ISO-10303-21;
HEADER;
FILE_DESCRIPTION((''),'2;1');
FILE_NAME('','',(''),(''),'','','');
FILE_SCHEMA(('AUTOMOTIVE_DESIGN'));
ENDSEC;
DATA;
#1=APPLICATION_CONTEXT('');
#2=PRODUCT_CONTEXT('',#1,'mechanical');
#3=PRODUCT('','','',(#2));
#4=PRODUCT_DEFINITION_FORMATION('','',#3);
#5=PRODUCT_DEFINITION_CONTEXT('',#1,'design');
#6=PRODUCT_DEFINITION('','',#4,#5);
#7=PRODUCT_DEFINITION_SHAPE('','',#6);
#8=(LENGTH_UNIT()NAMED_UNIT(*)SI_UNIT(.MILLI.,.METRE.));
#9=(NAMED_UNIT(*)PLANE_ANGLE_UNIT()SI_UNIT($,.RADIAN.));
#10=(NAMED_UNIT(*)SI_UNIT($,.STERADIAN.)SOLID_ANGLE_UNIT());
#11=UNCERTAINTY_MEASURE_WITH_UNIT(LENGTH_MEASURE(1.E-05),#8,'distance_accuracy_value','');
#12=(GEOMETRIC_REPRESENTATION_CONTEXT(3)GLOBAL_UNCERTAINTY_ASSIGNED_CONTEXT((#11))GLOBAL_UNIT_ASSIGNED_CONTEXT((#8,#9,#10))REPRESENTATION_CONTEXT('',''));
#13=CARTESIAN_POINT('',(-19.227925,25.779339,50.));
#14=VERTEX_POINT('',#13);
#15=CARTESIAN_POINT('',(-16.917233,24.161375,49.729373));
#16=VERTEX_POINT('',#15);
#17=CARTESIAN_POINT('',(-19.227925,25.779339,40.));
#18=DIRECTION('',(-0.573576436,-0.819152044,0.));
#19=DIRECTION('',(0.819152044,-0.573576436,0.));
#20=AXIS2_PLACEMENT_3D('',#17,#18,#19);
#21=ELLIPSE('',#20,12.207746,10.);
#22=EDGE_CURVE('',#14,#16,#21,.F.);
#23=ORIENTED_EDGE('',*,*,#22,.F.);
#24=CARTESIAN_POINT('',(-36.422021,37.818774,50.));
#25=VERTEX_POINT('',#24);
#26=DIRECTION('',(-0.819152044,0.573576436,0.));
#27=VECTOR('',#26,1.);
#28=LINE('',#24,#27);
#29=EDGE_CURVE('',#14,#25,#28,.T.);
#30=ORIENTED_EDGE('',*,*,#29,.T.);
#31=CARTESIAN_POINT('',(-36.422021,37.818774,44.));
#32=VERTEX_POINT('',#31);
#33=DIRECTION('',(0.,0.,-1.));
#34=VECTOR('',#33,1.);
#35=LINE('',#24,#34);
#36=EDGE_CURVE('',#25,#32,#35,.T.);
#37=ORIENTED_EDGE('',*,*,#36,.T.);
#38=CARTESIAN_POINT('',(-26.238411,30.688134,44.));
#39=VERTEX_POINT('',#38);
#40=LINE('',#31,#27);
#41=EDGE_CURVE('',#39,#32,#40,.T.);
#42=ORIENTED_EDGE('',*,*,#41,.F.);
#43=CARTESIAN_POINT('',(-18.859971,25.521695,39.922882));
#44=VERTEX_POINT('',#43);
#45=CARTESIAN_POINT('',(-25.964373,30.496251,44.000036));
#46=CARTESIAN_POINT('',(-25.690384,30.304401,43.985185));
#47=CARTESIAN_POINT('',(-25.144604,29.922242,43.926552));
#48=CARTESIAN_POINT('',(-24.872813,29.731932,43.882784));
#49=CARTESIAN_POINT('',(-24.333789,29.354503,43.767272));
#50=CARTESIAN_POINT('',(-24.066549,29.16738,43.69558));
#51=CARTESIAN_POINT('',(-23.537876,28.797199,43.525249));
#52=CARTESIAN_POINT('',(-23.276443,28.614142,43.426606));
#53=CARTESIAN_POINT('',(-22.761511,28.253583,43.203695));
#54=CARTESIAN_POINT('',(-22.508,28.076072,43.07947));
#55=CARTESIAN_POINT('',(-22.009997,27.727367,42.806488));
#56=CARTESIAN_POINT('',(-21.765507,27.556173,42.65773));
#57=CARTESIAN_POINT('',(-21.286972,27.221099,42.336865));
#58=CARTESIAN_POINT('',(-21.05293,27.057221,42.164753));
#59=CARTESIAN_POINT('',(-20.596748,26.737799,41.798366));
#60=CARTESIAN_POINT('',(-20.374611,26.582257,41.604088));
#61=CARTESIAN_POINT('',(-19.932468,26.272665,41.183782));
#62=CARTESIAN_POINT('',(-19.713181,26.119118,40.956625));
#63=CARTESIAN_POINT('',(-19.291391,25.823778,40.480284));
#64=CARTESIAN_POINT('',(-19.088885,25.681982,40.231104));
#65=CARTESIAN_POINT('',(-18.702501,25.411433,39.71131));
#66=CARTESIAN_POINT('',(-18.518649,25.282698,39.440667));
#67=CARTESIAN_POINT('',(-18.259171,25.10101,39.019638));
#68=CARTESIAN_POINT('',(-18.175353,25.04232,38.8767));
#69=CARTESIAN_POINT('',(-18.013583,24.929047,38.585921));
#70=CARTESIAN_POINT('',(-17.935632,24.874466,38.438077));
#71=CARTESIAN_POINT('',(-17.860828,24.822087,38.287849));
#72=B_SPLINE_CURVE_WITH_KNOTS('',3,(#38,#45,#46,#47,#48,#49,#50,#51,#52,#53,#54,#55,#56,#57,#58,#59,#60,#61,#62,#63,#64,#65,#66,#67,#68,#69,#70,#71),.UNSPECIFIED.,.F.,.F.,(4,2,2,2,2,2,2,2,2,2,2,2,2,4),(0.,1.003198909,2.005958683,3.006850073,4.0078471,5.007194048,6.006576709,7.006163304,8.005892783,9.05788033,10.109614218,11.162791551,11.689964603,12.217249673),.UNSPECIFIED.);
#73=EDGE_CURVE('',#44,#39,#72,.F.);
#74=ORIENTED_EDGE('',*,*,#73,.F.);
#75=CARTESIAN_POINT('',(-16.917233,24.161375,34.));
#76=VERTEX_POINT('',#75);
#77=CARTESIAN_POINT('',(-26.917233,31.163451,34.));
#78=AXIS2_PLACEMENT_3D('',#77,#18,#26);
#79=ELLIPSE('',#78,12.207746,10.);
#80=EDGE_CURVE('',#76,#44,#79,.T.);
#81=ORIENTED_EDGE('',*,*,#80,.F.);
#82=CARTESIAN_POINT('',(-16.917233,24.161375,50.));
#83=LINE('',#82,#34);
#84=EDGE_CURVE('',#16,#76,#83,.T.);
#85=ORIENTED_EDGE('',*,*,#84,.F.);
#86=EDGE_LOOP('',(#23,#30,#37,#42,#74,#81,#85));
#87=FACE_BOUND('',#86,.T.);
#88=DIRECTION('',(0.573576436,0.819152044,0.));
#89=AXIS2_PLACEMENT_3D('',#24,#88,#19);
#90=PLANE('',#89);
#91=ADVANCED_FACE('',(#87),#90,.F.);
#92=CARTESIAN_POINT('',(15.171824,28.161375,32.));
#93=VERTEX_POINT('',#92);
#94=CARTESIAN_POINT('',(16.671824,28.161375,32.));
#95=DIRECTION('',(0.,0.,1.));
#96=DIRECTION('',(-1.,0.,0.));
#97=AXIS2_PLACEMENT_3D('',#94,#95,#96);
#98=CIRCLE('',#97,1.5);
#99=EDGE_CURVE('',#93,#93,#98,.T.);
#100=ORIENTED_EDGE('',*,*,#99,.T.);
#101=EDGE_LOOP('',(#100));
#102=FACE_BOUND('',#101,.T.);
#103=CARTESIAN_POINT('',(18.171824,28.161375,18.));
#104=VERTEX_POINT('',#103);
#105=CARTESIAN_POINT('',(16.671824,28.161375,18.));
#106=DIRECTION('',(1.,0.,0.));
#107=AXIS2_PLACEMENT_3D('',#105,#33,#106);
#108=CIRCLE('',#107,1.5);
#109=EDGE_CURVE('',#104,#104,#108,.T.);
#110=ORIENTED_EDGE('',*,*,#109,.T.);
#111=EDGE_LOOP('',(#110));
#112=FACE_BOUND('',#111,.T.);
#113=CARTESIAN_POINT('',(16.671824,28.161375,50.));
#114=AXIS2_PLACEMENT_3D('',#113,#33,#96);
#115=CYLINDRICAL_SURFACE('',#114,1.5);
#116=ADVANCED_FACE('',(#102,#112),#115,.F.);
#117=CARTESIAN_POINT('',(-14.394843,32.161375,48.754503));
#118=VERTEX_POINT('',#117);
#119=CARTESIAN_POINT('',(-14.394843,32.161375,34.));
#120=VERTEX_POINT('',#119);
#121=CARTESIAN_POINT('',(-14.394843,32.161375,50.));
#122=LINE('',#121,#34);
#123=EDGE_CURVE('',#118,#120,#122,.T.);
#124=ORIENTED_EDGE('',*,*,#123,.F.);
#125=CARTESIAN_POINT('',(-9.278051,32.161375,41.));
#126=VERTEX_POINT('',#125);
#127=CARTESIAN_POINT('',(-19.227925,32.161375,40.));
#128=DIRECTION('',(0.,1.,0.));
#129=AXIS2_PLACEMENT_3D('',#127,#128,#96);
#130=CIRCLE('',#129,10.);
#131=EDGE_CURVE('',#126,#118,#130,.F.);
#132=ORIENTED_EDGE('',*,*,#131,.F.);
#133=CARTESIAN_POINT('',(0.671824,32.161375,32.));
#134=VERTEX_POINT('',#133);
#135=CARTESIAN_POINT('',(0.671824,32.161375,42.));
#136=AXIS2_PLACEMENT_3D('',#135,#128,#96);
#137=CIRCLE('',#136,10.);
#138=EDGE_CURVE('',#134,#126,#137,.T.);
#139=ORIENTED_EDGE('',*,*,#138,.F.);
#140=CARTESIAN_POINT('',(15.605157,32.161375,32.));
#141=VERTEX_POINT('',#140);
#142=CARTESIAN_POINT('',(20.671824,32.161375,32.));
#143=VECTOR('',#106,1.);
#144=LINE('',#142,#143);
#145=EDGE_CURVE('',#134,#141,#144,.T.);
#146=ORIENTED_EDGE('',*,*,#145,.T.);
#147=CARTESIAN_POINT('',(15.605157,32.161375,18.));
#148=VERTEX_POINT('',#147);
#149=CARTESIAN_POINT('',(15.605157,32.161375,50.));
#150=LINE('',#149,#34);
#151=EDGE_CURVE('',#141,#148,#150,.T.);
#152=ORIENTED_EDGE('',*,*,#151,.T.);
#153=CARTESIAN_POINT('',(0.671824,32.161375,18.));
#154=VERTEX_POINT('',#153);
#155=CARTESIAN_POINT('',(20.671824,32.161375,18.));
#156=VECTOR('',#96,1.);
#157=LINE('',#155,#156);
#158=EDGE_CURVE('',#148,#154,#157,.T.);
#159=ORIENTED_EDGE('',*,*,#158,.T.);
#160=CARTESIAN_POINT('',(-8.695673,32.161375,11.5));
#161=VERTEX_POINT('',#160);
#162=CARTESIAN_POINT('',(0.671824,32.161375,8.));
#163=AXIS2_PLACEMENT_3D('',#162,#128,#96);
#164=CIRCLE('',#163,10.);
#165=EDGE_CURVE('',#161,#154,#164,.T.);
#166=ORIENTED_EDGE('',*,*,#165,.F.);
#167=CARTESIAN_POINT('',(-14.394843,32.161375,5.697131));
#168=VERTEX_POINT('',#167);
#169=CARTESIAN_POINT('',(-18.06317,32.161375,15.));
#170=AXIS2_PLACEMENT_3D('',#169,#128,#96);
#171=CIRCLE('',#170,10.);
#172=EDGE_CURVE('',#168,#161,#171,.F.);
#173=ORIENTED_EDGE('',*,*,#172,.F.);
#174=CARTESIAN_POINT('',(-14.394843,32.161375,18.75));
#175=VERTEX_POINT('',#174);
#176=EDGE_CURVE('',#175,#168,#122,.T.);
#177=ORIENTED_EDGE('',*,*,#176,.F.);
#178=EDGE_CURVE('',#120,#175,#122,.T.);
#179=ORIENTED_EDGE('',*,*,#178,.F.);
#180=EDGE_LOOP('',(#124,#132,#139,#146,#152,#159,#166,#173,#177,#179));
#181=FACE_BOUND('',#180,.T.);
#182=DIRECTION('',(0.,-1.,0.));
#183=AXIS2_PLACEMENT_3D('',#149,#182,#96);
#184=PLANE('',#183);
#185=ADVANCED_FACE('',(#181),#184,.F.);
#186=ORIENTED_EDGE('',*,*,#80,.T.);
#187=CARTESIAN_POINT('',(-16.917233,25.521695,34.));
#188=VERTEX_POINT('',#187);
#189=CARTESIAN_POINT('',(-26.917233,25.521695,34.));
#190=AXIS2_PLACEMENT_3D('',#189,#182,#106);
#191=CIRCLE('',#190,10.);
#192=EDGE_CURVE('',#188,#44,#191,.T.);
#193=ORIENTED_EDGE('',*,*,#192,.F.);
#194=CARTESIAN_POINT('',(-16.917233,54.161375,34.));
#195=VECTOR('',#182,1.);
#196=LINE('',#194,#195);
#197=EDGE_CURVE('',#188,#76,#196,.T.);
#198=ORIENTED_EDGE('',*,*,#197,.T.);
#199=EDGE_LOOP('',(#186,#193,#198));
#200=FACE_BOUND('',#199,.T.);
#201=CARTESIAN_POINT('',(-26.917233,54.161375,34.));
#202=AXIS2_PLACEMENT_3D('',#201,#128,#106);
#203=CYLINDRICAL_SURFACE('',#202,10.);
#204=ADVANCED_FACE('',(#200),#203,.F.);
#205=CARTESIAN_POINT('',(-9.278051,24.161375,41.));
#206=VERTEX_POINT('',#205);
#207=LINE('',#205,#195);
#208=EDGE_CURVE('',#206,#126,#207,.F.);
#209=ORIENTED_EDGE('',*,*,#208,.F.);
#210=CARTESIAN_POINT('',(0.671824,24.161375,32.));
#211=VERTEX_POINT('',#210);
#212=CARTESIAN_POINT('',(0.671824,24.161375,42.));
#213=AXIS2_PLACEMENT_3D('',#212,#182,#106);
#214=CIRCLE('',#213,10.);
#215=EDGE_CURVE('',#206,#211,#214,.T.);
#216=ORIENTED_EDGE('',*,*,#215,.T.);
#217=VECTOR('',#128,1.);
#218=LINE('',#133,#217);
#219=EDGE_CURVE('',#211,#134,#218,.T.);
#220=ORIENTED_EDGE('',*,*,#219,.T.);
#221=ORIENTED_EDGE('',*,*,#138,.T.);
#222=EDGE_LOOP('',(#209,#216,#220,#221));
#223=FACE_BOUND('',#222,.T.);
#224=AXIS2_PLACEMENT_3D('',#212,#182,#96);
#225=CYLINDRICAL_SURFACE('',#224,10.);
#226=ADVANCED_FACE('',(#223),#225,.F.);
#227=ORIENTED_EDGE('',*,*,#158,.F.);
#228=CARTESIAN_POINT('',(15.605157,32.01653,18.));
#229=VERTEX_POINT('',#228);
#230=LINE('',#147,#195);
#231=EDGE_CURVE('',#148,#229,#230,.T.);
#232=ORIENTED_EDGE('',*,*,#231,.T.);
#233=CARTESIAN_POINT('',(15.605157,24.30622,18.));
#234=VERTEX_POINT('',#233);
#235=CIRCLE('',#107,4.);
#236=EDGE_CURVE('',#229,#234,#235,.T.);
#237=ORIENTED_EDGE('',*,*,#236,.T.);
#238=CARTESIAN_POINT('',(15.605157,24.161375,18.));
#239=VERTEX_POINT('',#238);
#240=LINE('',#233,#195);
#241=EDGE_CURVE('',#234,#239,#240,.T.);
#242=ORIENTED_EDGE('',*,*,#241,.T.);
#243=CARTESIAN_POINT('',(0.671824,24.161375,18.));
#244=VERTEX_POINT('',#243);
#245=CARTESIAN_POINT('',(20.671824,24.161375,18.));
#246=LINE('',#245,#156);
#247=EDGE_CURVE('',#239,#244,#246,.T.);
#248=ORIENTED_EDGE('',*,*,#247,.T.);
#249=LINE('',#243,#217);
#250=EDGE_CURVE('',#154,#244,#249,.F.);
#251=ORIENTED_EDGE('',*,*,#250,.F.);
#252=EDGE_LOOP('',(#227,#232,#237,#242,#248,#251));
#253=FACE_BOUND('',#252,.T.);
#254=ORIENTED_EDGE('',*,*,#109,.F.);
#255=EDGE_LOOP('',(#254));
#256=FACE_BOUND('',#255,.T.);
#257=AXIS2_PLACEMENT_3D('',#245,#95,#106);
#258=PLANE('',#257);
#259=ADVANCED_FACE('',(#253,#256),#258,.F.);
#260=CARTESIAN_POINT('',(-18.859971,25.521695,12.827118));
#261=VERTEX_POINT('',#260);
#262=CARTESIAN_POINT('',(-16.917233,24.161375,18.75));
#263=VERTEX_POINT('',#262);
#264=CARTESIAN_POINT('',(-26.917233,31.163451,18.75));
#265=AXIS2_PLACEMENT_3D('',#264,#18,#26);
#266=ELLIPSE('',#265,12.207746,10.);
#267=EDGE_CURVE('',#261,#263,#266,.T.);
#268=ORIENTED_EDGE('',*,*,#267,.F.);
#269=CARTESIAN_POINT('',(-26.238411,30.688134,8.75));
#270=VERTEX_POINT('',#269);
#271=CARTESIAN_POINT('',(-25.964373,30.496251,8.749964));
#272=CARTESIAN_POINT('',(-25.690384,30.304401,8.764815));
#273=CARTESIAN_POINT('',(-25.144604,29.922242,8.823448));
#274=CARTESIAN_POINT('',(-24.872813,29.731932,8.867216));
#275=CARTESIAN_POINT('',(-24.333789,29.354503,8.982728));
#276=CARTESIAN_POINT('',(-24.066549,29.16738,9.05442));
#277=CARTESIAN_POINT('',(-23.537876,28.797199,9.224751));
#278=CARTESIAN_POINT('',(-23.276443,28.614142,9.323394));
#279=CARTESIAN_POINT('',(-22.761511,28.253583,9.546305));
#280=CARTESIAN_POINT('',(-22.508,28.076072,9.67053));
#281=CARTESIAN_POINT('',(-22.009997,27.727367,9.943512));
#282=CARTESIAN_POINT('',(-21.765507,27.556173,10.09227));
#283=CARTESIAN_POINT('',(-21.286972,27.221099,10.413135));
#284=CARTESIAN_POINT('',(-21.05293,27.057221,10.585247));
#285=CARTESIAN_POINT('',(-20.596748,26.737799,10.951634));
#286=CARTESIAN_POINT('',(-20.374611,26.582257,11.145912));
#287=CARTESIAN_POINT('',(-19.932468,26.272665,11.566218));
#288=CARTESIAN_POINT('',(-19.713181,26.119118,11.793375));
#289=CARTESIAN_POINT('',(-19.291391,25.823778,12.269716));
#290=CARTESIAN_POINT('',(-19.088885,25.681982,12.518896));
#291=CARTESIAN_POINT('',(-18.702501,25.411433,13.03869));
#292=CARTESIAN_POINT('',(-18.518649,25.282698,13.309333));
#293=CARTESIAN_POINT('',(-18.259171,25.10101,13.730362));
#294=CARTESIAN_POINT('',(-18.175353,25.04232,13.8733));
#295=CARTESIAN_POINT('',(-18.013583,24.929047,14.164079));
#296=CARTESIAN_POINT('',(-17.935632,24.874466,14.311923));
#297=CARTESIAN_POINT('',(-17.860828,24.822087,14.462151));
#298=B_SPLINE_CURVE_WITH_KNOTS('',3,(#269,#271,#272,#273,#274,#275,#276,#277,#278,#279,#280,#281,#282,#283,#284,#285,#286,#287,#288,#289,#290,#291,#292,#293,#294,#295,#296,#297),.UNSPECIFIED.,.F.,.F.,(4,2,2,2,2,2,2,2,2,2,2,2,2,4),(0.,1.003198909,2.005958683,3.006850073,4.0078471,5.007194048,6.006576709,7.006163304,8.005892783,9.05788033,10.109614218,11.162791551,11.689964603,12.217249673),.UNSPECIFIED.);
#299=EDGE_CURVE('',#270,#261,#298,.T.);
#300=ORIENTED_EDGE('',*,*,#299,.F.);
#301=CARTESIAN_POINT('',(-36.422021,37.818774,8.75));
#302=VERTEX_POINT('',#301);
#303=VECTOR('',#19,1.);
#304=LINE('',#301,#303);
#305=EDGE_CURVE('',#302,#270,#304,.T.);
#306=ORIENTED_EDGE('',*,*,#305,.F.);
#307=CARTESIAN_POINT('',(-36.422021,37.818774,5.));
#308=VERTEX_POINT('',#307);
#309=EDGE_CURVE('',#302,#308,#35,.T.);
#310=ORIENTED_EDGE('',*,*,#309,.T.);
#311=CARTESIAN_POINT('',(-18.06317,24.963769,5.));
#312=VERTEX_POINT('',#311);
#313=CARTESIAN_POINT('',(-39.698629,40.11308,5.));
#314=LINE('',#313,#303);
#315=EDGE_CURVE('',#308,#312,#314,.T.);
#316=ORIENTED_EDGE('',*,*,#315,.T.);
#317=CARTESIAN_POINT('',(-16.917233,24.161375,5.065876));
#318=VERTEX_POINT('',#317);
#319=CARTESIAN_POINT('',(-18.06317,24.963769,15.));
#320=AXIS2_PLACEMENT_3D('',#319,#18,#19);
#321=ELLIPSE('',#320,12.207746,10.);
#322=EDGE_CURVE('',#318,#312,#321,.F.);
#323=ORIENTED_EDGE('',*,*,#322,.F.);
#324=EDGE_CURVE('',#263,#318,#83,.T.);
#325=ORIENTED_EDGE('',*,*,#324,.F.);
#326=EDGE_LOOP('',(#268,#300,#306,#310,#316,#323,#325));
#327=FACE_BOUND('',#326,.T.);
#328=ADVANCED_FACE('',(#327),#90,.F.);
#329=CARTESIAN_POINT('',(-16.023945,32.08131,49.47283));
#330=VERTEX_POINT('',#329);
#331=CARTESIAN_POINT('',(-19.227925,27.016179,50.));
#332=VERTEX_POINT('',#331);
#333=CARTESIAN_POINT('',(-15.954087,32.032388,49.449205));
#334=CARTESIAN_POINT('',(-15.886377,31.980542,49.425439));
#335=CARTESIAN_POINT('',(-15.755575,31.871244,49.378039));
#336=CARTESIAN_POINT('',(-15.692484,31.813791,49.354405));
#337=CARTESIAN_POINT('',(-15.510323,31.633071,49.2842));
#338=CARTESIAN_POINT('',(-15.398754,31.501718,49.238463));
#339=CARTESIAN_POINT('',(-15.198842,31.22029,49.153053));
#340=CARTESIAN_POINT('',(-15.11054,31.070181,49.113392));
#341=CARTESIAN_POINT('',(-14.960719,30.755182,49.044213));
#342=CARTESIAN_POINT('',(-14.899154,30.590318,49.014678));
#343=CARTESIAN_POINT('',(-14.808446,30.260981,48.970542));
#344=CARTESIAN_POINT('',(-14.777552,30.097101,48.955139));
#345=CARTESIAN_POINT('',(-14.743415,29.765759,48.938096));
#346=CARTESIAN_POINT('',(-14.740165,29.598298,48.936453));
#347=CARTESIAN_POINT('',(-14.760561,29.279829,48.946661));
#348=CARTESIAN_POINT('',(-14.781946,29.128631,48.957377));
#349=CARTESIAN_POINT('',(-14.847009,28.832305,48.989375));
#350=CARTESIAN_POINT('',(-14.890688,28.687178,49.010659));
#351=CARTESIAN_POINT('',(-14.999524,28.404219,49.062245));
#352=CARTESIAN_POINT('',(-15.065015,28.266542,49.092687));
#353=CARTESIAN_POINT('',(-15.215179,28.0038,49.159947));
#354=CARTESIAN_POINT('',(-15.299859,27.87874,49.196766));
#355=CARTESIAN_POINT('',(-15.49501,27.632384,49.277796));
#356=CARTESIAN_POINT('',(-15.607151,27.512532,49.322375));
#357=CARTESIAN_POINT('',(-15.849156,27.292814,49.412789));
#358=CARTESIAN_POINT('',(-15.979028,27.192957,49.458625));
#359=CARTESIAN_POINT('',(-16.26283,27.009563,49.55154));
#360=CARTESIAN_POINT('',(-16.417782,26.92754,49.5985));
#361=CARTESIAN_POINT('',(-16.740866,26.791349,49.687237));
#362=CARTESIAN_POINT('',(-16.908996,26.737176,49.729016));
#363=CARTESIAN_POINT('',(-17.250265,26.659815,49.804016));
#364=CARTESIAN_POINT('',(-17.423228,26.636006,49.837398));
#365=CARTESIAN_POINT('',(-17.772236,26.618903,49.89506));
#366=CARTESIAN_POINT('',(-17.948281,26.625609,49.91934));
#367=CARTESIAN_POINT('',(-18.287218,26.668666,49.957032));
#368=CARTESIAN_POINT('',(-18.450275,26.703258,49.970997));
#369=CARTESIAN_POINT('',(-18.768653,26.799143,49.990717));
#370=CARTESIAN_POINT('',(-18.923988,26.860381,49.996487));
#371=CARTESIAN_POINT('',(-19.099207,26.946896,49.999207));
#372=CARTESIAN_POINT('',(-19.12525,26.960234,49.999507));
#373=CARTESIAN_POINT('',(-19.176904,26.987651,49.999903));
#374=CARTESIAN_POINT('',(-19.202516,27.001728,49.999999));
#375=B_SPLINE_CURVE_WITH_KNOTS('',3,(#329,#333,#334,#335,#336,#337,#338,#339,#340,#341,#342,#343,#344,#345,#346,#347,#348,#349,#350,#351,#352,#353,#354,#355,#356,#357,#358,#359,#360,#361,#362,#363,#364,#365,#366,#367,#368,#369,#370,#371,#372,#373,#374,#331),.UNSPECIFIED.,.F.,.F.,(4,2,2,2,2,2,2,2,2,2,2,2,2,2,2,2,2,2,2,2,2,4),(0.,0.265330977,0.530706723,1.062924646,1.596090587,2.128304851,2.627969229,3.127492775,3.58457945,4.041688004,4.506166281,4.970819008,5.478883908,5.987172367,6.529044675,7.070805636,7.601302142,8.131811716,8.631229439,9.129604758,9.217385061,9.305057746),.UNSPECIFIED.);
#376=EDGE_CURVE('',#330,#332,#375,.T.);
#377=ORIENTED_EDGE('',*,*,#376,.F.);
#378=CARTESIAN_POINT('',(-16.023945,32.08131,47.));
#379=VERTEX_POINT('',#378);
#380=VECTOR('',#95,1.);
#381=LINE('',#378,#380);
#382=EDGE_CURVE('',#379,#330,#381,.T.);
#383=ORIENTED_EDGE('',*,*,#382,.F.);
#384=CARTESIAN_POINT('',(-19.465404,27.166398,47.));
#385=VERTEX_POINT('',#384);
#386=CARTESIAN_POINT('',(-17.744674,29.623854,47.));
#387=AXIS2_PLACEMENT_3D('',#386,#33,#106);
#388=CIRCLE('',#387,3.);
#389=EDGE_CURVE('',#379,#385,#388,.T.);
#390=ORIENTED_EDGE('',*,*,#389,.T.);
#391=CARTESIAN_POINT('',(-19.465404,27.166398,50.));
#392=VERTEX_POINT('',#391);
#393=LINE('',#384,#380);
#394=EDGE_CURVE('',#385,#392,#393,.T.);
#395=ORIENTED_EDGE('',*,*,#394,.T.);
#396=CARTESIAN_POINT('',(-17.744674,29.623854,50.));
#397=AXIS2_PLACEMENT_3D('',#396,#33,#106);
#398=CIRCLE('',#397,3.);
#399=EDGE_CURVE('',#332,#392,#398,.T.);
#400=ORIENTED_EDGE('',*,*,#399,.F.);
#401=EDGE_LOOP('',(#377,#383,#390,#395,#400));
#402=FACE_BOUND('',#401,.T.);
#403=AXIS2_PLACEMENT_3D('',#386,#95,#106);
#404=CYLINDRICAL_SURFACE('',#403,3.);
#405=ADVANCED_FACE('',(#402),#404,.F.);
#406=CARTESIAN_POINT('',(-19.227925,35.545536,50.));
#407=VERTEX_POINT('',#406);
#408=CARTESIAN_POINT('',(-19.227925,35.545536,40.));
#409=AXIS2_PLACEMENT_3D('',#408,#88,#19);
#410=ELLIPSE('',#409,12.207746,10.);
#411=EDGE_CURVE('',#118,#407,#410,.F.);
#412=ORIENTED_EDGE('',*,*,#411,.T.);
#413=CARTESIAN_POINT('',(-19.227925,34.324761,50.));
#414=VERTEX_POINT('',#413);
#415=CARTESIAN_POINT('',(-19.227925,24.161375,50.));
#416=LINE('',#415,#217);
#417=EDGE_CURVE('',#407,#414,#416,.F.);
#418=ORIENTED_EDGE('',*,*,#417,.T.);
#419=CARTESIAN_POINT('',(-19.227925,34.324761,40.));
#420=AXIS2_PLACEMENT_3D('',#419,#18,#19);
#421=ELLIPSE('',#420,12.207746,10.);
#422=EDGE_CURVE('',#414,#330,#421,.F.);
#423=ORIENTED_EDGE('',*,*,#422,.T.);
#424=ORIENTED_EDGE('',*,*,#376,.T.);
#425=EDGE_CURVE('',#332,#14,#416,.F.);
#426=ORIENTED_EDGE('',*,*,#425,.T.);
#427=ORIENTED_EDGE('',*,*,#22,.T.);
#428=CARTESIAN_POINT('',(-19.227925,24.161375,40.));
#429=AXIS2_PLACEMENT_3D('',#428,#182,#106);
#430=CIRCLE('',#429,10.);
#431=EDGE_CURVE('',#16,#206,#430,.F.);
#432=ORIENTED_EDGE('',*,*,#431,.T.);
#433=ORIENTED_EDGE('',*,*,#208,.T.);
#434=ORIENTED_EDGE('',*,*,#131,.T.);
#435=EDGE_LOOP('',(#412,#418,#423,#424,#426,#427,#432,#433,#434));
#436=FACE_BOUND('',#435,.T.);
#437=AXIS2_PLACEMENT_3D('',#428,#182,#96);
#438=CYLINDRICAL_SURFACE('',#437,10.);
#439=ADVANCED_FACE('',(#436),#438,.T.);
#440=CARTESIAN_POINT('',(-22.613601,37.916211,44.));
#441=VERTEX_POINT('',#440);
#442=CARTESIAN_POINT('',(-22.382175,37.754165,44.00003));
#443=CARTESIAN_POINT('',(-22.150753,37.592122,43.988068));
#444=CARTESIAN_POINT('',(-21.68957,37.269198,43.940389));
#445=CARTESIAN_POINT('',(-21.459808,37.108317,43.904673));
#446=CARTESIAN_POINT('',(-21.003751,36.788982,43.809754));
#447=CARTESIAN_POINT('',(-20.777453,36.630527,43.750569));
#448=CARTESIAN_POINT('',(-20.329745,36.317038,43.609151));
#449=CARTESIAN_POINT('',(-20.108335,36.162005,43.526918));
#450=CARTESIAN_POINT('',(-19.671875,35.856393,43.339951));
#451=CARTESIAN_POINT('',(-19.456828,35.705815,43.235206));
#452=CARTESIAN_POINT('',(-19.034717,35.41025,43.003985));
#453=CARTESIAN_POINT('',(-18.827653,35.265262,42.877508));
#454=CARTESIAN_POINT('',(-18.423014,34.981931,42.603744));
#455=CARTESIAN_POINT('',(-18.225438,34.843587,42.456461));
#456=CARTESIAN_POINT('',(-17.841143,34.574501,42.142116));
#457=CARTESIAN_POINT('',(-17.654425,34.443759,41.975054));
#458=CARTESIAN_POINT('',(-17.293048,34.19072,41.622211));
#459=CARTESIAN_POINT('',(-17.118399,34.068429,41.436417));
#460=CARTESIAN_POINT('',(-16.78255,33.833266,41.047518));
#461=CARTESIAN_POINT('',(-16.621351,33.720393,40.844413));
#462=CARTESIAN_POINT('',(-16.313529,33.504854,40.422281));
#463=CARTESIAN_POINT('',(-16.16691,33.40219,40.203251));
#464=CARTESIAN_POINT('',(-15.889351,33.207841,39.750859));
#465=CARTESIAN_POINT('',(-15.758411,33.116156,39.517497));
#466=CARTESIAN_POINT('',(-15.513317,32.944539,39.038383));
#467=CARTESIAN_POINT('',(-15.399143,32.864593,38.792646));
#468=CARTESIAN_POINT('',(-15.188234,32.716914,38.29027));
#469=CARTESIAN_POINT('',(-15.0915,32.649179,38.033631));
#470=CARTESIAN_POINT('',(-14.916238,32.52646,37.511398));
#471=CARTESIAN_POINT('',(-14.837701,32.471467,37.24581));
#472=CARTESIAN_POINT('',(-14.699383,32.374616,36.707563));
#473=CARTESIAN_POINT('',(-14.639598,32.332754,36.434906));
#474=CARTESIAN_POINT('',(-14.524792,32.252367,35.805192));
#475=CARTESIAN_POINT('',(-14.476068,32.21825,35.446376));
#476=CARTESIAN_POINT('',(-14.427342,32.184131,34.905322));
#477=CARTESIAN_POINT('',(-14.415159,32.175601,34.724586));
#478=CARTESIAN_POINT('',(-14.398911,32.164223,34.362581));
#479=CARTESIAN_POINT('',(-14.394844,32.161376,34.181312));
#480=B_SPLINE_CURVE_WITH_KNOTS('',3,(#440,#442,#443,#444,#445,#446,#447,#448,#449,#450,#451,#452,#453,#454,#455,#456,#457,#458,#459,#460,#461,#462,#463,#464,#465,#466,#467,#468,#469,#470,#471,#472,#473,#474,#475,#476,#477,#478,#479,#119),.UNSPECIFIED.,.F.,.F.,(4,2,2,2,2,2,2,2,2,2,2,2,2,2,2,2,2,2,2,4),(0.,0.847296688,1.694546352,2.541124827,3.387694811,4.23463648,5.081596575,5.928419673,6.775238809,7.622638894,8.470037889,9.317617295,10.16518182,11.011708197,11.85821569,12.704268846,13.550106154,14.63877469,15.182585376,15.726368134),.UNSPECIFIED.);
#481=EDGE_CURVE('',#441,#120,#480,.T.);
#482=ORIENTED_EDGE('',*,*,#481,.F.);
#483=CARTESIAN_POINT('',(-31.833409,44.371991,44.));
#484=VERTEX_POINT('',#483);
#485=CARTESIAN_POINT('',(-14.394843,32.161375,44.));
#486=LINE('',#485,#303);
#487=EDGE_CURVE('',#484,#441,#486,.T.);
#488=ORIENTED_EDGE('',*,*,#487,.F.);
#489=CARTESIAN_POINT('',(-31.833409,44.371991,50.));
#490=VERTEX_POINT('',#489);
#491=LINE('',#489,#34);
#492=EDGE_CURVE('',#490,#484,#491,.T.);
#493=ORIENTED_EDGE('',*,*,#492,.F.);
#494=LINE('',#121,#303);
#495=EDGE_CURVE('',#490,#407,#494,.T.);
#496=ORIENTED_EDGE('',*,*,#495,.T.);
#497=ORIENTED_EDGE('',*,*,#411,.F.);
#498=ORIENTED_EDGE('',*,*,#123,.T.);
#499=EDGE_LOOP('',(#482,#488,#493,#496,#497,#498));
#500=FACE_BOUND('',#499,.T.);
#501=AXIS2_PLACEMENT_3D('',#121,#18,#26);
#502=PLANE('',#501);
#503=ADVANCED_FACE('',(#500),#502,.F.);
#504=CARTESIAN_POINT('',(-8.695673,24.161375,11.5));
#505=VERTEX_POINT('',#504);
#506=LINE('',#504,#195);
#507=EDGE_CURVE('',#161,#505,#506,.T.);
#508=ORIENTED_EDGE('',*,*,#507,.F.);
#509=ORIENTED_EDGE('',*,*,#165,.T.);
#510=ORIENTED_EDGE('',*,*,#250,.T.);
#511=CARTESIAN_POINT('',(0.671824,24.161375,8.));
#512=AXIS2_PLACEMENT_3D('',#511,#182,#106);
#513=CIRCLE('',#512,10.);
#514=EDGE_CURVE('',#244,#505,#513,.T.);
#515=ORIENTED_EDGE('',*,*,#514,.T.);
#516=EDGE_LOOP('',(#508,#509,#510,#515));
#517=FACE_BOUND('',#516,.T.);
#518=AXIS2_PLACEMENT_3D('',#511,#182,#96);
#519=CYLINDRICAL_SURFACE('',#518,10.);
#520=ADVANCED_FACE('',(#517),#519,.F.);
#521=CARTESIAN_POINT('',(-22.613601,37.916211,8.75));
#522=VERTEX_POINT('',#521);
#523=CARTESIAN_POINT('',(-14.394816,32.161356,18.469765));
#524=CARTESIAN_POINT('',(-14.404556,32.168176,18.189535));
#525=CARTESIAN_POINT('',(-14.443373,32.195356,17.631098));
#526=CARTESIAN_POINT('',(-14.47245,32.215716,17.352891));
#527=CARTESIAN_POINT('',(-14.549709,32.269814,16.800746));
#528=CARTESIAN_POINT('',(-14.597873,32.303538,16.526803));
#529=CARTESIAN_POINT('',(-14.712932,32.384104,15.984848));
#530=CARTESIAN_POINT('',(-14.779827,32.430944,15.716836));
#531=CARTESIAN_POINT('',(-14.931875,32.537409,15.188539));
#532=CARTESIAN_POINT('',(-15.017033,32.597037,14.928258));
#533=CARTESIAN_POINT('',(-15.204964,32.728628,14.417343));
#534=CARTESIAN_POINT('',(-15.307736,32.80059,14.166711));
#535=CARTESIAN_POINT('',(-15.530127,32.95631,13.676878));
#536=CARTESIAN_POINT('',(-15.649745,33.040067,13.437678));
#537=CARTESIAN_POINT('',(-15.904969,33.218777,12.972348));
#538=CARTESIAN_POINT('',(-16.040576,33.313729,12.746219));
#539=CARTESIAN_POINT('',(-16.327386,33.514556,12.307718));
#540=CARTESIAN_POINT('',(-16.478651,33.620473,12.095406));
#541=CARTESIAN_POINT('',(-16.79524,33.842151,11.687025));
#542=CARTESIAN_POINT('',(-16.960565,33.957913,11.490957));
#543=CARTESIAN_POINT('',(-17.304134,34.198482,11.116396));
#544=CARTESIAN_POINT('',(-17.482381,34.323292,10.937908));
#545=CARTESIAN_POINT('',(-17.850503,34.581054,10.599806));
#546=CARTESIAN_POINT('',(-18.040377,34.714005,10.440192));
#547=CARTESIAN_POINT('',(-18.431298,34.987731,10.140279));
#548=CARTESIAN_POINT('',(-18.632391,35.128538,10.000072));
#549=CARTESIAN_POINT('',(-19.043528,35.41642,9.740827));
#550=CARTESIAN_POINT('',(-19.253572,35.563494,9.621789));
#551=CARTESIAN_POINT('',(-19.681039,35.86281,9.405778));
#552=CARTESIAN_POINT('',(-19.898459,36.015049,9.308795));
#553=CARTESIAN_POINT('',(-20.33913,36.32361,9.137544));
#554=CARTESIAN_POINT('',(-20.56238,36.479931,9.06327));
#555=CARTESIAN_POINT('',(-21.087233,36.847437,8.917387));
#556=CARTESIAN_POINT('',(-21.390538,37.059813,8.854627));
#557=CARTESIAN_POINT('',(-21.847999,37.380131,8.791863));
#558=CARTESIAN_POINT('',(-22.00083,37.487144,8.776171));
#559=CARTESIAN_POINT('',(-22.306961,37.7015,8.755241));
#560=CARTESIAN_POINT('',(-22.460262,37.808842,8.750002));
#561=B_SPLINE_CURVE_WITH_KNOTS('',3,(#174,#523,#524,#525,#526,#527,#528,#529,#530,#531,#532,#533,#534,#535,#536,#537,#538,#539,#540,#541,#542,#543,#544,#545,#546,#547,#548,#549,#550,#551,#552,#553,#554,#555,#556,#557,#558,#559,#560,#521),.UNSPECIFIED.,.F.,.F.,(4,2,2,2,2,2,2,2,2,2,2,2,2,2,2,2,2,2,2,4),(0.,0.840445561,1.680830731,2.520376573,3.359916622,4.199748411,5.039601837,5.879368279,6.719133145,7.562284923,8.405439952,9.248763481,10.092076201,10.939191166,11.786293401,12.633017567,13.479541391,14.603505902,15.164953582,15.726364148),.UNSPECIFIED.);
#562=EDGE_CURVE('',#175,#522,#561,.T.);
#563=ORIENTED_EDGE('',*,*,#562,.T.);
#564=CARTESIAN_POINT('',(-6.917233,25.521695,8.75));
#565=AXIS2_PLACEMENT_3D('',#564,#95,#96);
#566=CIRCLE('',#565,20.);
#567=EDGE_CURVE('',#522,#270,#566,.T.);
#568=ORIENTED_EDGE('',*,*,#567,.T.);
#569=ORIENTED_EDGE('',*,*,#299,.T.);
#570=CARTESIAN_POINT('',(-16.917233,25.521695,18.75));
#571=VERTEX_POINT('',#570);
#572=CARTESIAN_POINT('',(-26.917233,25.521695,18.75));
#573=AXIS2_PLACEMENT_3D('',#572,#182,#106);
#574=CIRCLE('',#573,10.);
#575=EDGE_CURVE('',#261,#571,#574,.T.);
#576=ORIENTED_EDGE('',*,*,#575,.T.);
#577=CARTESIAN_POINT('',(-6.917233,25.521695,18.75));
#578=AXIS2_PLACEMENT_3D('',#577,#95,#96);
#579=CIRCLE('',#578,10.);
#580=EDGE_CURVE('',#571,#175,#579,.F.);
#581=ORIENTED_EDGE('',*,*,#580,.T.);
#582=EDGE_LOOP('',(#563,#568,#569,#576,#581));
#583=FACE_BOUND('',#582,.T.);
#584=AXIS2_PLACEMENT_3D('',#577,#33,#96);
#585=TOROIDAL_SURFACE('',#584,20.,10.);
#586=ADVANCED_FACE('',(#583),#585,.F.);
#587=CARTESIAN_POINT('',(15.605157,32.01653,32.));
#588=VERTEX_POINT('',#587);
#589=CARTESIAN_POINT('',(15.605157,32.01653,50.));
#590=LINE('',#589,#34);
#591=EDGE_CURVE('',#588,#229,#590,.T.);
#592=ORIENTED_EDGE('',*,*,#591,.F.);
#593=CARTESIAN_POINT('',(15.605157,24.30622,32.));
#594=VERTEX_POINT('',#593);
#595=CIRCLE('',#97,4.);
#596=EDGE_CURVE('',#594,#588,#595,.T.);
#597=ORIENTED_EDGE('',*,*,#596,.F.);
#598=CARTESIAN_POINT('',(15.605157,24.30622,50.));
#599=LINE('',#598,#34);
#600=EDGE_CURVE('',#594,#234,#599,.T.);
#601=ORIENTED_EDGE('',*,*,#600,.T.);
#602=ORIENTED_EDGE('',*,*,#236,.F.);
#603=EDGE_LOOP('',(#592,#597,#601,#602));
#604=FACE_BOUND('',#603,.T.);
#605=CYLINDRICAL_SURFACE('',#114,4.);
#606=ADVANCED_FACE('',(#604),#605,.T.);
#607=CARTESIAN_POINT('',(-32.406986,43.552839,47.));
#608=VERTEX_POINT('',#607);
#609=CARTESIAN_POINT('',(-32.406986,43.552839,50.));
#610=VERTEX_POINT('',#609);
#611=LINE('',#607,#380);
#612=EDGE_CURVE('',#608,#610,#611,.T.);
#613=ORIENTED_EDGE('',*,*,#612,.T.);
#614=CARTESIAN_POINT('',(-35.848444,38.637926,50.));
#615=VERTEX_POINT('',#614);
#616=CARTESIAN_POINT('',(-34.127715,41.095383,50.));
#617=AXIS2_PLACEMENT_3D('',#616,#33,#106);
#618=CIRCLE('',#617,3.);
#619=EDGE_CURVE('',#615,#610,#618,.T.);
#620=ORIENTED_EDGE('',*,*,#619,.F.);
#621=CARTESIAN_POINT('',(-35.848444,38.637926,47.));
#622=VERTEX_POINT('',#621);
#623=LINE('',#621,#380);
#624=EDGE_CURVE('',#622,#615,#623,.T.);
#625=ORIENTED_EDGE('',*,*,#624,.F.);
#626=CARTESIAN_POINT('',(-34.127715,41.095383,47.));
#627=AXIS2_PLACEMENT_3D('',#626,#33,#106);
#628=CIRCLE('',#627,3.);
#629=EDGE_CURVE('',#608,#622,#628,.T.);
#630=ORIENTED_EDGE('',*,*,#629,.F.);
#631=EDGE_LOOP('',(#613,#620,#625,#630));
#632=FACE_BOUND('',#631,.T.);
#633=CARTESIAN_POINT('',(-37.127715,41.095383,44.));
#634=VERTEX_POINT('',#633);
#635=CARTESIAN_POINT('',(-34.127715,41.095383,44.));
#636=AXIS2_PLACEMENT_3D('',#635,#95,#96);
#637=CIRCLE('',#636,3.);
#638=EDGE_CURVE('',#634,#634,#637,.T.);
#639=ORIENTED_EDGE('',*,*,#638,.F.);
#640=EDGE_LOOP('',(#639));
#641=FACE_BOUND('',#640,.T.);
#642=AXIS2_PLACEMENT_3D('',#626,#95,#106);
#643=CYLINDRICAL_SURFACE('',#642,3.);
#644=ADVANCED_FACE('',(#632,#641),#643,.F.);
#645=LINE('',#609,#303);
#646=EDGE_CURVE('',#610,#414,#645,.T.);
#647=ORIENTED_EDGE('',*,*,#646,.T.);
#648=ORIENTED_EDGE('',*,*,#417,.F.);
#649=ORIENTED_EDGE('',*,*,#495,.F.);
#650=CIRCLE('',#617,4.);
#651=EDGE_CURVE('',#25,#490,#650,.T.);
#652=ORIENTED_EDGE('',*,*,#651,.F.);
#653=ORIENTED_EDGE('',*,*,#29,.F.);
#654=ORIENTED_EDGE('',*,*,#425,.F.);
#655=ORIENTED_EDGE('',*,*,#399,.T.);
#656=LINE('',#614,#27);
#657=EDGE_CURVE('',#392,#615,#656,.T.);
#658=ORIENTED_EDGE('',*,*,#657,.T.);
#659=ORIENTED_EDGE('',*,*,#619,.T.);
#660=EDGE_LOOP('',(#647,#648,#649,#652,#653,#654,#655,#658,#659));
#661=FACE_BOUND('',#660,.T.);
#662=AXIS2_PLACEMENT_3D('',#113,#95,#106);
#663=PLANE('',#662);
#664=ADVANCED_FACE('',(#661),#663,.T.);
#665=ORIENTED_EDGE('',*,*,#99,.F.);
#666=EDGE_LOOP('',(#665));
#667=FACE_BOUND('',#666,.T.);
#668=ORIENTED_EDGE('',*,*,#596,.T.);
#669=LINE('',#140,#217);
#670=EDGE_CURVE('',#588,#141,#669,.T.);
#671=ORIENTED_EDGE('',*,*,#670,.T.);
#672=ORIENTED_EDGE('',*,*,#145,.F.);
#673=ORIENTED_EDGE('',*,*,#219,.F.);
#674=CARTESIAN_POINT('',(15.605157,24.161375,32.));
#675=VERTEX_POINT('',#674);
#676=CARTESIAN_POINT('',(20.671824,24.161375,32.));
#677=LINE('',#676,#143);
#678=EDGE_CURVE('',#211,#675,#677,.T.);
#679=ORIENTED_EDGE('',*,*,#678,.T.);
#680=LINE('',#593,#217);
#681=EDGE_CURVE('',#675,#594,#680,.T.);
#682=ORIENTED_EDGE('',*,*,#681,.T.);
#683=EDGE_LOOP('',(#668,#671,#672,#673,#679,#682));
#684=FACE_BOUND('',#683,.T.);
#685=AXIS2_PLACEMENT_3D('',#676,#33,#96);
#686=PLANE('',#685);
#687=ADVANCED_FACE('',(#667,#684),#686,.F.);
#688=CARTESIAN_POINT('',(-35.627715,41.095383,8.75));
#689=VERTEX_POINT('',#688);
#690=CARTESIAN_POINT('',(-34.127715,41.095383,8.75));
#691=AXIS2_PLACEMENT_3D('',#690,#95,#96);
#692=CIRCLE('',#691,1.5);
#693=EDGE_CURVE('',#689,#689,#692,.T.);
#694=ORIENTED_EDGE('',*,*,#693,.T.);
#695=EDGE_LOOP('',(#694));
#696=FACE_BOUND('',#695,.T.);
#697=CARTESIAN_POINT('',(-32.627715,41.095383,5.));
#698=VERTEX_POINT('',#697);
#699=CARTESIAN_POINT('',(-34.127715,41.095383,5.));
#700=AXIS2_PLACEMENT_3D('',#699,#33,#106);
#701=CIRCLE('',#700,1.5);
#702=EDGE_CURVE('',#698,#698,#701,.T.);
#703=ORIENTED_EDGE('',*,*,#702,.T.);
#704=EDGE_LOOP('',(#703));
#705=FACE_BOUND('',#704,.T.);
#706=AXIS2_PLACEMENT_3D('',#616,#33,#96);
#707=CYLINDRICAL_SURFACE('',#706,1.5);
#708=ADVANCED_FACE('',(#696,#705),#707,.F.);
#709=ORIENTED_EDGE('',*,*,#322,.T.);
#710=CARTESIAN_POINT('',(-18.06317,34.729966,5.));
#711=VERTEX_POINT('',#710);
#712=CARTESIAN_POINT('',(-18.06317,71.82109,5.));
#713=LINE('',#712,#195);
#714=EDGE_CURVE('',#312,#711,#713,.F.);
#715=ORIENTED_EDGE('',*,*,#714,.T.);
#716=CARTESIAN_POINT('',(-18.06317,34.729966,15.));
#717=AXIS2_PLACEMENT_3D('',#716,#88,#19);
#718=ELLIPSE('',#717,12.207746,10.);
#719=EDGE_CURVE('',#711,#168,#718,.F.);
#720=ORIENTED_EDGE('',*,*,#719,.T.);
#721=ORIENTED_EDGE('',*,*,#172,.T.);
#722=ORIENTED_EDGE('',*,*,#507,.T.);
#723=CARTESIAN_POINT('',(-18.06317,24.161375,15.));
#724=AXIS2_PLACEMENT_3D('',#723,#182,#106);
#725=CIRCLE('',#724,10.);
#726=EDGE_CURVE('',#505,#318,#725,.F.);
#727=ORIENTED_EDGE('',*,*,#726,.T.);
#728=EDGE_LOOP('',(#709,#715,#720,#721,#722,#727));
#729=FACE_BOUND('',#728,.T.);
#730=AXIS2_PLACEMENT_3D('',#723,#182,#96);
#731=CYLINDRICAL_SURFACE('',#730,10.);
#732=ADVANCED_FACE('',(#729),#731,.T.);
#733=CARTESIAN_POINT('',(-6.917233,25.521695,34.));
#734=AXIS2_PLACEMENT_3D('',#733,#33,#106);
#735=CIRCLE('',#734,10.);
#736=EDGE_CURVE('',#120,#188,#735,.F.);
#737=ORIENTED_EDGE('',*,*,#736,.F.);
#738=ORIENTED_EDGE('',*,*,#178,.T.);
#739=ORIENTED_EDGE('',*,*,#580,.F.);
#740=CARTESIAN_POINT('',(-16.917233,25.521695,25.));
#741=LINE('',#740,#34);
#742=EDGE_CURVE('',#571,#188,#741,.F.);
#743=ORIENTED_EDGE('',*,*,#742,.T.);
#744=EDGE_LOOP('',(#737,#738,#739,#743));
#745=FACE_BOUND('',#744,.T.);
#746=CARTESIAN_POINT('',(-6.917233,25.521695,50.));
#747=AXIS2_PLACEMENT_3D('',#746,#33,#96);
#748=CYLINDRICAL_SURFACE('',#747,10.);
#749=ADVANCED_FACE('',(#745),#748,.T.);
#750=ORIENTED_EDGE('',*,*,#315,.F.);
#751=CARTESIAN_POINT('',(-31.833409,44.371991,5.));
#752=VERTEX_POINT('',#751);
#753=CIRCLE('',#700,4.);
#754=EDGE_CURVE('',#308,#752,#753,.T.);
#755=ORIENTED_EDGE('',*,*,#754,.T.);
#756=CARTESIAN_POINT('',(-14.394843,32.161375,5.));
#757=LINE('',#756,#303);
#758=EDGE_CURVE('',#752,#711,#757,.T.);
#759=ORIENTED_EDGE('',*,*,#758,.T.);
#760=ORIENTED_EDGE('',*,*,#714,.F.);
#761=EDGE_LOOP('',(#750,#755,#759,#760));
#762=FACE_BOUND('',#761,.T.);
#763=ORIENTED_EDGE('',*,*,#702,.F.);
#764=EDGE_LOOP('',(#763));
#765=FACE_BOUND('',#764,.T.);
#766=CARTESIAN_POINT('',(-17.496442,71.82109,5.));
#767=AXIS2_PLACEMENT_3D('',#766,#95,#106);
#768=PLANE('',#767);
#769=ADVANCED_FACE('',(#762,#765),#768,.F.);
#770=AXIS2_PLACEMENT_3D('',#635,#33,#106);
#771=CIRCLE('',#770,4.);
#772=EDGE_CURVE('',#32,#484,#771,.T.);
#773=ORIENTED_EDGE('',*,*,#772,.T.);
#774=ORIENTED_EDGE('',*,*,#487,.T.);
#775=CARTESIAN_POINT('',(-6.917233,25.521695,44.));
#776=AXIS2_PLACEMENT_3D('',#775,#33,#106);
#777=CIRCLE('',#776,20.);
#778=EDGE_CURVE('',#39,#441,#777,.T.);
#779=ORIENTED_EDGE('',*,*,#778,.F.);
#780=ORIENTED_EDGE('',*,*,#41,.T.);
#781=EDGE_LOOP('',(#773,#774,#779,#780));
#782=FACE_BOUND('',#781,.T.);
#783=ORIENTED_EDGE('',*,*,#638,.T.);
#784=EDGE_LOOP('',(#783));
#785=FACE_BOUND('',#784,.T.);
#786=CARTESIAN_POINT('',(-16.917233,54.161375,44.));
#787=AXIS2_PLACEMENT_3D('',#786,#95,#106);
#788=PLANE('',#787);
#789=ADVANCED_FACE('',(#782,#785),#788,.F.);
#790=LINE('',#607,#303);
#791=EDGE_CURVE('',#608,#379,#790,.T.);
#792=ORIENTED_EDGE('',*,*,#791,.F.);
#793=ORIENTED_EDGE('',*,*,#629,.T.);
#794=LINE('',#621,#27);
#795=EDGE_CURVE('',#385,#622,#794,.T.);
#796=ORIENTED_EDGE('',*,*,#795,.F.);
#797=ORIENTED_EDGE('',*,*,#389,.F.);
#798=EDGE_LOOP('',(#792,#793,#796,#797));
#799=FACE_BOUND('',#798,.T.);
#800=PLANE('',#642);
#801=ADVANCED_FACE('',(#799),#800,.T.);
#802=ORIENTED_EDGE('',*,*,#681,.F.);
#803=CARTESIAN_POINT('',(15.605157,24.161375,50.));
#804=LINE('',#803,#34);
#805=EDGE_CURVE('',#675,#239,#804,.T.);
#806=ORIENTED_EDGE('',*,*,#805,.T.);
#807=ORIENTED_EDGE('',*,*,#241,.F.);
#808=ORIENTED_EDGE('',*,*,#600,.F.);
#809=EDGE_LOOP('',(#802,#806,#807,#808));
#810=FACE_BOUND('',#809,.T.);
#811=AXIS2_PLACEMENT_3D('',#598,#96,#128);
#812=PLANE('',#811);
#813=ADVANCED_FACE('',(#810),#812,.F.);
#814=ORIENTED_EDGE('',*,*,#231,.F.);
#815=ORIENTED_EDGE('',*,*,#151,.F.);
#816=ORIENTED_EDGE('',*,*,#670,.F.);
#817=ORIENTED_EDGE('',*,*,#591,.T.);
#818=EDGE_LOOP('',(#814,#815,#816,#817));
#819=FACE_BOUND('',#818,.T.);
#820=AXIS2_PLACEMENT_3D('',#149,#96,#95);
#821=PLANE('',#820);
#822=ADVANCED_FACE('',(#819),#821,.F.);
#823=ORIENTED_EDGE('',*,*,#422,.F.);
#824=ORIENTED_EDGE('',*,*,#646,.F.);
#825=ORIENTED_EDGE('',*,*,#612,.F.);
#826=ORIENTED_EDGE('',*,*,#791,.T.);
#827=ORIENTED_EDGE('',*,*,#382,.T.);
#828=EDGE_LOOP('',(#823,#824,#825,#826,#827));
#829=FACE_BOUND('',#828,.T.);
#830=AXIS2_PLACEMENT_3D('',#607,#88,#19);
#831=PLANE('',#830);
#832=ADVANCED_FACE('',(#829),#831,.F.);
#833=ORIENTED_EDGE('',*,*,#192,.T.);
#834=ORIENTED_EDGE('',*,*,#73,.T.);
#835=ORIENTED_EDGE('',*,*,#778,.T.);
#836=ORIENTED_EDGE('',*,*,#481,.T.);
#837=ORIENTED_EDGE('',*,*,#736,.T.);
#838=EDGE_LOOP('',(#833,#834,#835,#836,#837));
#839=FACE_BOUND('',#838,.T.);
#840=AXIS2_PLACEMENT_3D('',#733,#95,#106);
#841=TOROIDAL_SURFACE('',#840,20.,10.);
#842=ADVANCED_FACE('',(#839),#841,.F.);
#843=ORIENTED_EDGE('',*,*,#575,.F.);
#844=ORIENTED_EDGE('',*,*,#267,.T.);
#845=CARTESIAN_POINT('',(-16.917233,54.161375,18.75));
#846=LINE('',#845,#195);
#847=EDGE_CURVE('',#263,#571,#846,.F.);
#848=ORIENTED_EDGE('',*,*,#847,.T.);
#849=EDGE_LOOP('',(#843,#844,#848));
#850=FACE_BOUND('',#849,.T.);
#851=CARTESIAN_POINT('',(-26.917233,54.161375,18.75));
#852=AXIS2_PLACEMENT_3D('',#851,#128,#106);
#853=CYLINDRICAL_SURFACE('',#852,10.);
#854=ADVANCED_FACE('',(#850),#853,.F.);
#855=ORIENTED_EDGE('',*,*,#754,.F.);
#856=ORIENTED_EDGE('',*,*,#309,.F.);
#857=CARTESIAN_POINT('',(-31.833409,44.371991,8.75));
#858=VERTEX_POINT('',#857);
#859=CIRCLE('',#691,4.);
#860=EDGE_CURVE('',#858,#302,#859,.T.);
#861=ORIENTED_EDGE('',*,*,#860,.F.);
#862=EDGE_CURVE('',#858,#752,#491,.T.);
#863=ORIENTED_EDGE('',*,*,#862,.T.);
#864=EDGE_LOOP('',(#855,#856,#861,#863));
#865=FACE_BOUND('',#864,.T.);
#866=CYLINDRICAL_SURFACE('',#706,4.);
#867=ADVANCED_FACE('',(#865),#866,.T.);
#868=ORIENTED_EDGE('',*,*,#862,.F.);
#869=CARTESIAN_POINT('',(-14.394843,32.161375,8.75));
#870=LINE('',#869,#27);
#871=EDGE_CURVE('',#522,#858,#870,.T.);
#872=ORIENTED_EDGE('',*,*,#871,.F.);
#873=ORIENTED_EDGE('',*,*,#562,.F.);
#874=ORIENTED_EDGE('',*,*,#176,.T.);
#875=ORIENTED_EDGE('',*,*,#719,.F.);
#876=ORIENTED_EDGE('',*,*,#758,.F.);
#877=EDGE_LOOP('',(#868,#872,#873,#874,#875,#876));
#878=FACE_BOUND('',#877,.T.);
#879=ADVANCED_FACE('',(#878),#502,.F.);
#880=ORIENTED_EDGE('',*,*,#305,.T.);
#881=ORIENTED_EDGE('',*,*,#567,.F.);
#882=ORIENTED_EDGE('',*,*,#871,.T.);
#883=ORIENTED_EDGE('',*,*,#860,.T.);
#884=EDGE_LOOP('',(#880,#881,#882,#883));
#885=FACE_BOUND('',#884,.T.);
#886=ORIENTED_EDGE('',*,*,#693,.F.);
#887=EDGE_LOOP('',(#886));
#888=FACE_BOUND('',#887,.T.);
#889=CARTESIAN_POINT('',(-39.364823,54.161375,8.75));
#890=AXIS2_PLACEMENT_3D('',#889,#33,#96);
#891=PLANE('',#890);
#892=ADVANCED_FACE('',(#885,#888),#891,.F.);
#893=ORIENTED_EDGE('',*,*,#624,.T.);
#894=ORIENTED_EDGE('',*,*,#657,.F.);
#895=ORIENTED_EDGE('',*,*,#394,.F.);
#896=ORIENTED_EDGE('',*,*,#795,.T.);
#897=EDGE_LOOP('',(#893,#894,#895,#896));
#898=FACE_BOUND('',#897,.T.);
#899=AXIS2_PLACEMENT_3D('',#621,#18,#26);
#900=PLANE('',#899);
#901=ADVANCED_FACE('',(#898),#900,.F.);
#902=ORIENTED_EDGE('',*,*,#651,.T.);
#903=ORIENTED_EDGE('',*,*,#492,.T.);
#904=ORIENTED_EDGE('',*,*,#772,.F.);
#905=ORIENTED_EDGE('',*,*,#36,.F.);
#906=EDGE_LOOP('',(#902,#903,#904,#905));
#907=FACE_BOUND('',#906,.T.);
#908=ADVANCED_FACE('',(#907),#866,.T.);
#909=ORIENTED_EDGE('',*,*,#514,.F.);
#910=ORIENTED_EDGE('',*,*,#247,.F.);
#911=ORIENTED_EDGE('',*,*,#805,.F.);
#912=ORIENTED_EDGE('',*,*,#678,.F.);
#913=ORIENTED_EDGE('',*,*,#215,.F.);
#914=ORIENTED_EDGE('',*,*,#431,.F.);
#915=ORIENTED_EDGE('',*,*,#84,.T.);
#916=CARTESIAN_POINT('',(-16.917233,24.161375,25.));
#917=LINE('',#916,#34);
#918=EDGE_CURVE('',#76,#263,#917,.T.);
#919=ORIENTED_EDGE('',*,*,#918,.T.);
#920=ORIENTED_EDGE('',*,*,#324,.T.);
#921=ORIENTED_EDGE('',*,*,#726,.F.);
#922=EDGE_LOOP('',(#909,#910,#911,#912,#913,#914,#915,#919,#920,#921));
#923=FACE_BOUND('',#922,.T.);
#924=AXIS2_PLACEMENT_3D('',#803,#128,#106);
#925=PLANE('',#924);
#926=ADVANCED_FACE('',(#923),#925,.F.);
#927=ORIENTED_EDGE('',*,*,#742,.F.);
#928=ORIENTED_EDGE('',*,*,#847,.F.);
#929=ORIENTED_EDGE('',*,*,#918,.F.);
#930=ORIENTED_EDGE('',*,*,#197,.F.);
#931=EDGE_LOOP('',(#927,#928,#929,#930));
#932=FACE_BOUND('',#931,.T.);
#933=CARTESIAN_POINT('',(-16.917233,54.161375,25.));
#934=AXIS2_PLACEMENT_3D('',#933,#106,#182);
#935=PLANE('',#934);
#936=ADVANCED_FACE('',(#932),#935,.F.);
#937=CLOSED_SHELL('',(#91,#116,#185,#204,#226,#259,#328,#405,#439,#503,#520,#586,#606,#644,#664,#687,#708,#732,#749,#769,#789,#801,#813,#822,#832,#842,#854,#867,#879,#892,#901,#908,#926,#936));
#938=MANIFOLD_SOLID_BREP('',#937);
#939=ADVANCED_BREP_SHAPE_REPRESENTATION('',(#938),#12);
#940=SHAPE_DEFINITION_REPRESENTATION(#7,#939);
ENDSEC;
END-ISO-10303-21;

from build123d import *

# Parameters (mm, degrees)
SKETCH_1_R           = 1.5
EXTRUDE_2_DEPTH      = 50
SKETCH_14_W          = 30
SKETCH_14_H          = 18
CUT_EXTRUDE_6_DEPTH  = 65.195102675
SKETCH_15_W          = 22.4475894
SKETCH_15_H          = 16.25
CUT_EXTRUDE_7_DEPTH  = 30
SKETCH_17_W          = 25.359818697
SKETCH_17_H          = 19
CUT_EXTRUDE_9_DEPTH  = 30
FILLET_8_R           = 10
SKETCH_19_W          = 34.027540403
SKETCH_19_H          = 5
CUT_EXTRUDE_11_DEPTH = 65.759348106
FILLET_9_R           = 10
FILLET_11_R          = 10
FILLET_12_R          = 10
CUT_EXTRUDE_12_DEPTH = 3
CUT_EXTRUDE_START    = -5
SKETCH_21_R          = 3
CUT_EXTRUDE_13_DEPTH = 5


with BuildPart() as part:
    # 草图1 → 凸台-拉伸2 (new body)
    with BuildSketch(Plane.XY):
        with BuildLine():
            Line((15.60515688, 4.016530447), (15.60515688, 4.161375168))
            Line((15.60515688, 4.161375168), (-16.917233431, 4.161375168))
            Line((-16.917233431, 4.161375168), (-36.422020871, -9.496024029))
            ThreePointArc((-36.422020871, -9.496024029), (-37.404323302, -15.066937951), (-31.83340938, -16.049240383))
            Line((-31.83340938, -16.049240383), (-14.39484312, -3.838624832))
            Line((-14.39484312, -3.838624832), (15.60515688, -3.838624832))
            Line((15.60515688, -3.838624832), (15.60515688, -3.693780111))
            ThreePointArc((15.60515688, -3.693780111), (20.671823547, 0.161375168), (15.60515688, 4.016530447))
        make_face()
        with Locations((-34.127715125, -12.772632206)):
            Circle(SKETCH_1_R, mode=Mode.SUBTRACT)
        with Locations((16.671823547, 0.161375168)):
            Circle(SKETCH_1_R, mode=Mode.SUBTRACT)
    extrude(amount=EXTRUDE_2_DEPTH)

    # 草图14 → 切除-拉伸6 (cut, through all)
    with BuildSketch(Plane.XZ.offset(3.838624832)):
        with Locations((5.671823547, 41)):
            Rectangle(SKETCH_14_W, SKETCH_14_H)
        with Locations((5.671823547, 9)):
            Rectangle(SKETCH_14_W, SKETCH_14_H)
    extrude(amount=-CUT_EXTRUDE_6_DEPTH, mode=Mode.SUBTRACT)

    # 草图15 → 切除-拉伸7 (cut)
    with BuildSketch(Plane(origin=(0, 4.161375168, 0), x_dir=(1, 0, 0), z_dir=(0, 1, 0))):
        with Locations((-28.141028131, -16.875)):
            Rectangle(SKETCH_15_W, SKETCH_15_H)
    extrude(amount=-CUT_EXTRUDE_7_DEPTH, mode=Mode.SUBTRACT)

    # 草图17 → 切除-拉伸9 (cut)
    with BuildSketch(Plane(origin=(0, 4.161375168, 0), x_dir=(1, 0, 0), z_dir=(0, 1, 0))):
        with Locations((-29.59714278, -34.5)):
            Rectangle(SKETCH_17_W, SKETCH_17_H)
    extrude(amount=-CUT_EXTRUDE_9_DEPTH, mode=Mode.SUBTRACT)

    # 圆角8
    # the kernel refuses this fillet: 10 mm, written as the material it takes off along each edge
    with BuildSketch(Plane(origin=(-16.917233431, -5.604821542, 8.75), x_dir=(0.8191520442889905, 0.573576436351048, 0), z_dir=(0, 0, 1))) as fillet_8_piece_1:
        with BuildLine():
            CenterArc((13.012933373, 1.149926903), FILLET_8_R, 145, 41.603203435)
            Line((4.82141293, 6.885691266), (0, 0))
            Line((0, 0), (3.079269995, 0))
        make_face()
    extrude(amount=35.25, mode=Mode.SUBTRACT)

    # 草图19 → 切除-拉伸11 (cut, through all)
    with BuildSketch(Plane(origin=(-7.520806183, 10.740824359, 0), x_dir=(0.8191520442889908, 0.5735764363510477, 0), z_dir=(-0.5735764363510477, 0.8191520442889908, 0))):
        with Locations((-22.268098274, -2.5)):
            Rectangle(SKETCH_19_W, SKETCH_19_H)
    extrude(amount=-CUT_EXTRUDE_11_DEPTH, mode=Mode.SUBTRACT)

    # 圆角9
    fillet_9_edges = [part.edges().sort_by_distance(p)[0] for p in [
        (-9.328176453, 0.161375168, 18),
        (-9.328176453, 0.161375168, 32),
    ]]
    fillet(fillet_9_edges, radius=FILLET_9_R)

    # 圆角11
    # the kernel refuses this fillet: 10 mm, written as the material it adds along each edge
    with BuildSketch(Plane(origin=(-16.917233431, 29.161375168, 44), x_dir=(0, 0, -1), z_dir=(0, -1, 0))) as fillet_11_piece_1_section:
        with BuildLine():
            CenterArc((FILLET_11_R, -FILLET_11_R), FILLET_11_R, 90, 90)
            Line((0, -FILLET_11_R), (0, 0))
            Line((0, 0), (FILLET_11_R, 0))
        make_face()
    fillet_11_piece_1 = extrude(amount=26.360319786, mode=Mode.PRIVATE)
    fillet_11_piece_1 = split(fillet_11_piece_1, bisect_by=Plane(origin=(-17.705446038, 3.609462759, 40.498761656), z_dir=(0.5735764363510475, -0.8191520442889908, 0)), keep=Keep.TOP, mode=Mode.PRIVATE)
    add(fillet_11_piece_1)
    with BuildSketch(Plane(origin=(-16.917233431, 29.161375168, 8.75), x_dir=(-1, 0, 0), z_dir=(0, -1, 0))) as fillet_11_piece_2_section:
        with BuildLine():
            CenterArc((FILLET_11_R, -FILLET_11_R), FILLET_11_R, 90, 90)
            Line((0, -FILLET_11_R), (0, 0))
            Line((0, 0), (FILLET_11_R, 0))
        make_face()
    fillet_11_piece_2 = extrude(amount=26.360319786, mode=Mode.PRIVATE)
    fillet_11_piece_2 = split(fillet_11_piece_2, bisect_by=Plane(origin=(-17.705446038, 3.609462759, 12.251238344), z_dir=(0.5735764363510475, -0.8191520442889908, 0)), keep=Keep.TOP, mode=Mode.PRIVATE)
    add(fillet_11_piece_2)
    with BuildSketch(Plane(origin=(-6.917233431, 2.801055382, 8.75), x_dir=(-1, 0, 0), z_dir=(0, 1, 0))) as fillet_11_piece_3_section:
        with BuildLine():
            CenterArc((10 + FILLET_11_R, FILLET_11_R), FILLET_11_R, 180, 90)
            Line((10 + FILLET_11_R, 0), (10, 0))
            Line((10, 0), (10, FILLET_11_R))
        make_face()
    fillet_11_piece_3 = revolve(axis=Axis((-6.917233431, 2.801055382, 8.75), (0, 0, 1)), revolution_arc=184.854944875, mode=Mode.PRIVATE)
    fillet_11_piece_3 = split(fillet_11_piece_3, bisect_by=Plane(origin=(-14.201650521, -3.703349918, 18.374598869), z_dir=(-0.5735764363510472, 0.819152044288991, 0)), keep=Keep.TOP, mode=Mode.PRIVATE)
    fillet_11_piece_3 = split(fillet_11_piece_3, bisect_by=Plane(origin=(-18.790262012, 2.849866436, 18.374598869), z_dir=(0.5735764363510475, -0.8191520442889908, 0)), keep=Keep.TOP, mode=Mode.PRIVATE)
    add(fillet_11_piece_3)
    with BuildSketch(Plane(origin=(-6.917233431, 2.801055382, 44), x_dir=(-1, 0, 0), z_dir=(0, 1, 0))) as fillet_11_piece_4_section:
        with BuildLine():
            CenterArc((10 + FILLET_11_R, -FILLET_11_R), FILLET_11_R, 90, 90)
            Line((10 + FILLET_11_R, 0), (10, 0))
            Line((10, 0), (10, -FILLET_11_R))
        make_face()
    fillet_11_piece_4 = revolve(axis=Axis((-6.917233431, 2.801055382, 44), (0, 0, 1)), revolution_arc=184.854944875, mode=Mode.PRIVATE)
    fillet_11_piece_4 = split(fillet_11_piece_4, bisect_by=Plane(origin=(-14.743190126, -4.082540032, 40.444195091), z_dir=(-0.5735764363510472, 0.819152044288991, 0)), keep=Keep.TOP, mode=Mode.PRIVATE)
    fillet_11_piece_4 = split(fillet_11_piece_4, bisect_by=Plane(origin=(-19.331801617, 2.470676322, 40.444195091), z_dir=(0.5735764363510475, -0.8191520442889908, 0)), keep=Keep.TOP, mode=Mode.PRIVATE)
    add(fillet_11_piece_4)

    # 圆角12
    # the kernel refuses this fillet: 10 mm, written as the material it takes off along each edge
    with BuildSketch(Plane(origin=(-9.328176453, -28.587996687, 50), x_dir=(-1, 0, 0), z_dir=(0, 1, 0))) as fillet_12_piece_1:
        with BuildLine():
            CenterArc((9.899748742, -10), FILLET_12_R, 90, 84.260829523)
            Line((-0.050125629, -9), (-1.045113066, -8.9))
            ThreePointArc((-1.045113066, -8.9), (-1, -8), (-1, 0))
            Line((-1, 0), (0, 1))
            Line((0, 1), (9.899748742, 1))
            Line((9.899748742, 1), (9.899748742, 0))
        make_face()
    extrude(amount=57.498743711, mode=Mode.SUBTRACT)
    with BuildSketch(Plane(origin=(-9.328176453, -25.67610982, 5), x_dir=(-1, 0, 0), z_dir=(0, 1, 0))) as fillet_12_piece_2:
        with BuildLine():
            CenterArc((8.734993995, 10), FILLET_12_R, 200.487315115, 69.512684885)
            Line((-0.632503002, 6.5), (-1.569252702, 6.15))
            ThreePointArc((-1.569252702, 6.15), (-1, 3), (-1, 0))
            Line((-1, 0), (0, -1))
            Line((0, -1), (8.734993995, -1))
            Line((8.734993995, -1), (8.734993995, 0))
        make_face()
    extrude(amount=51.674969976, mode=Mode.SUBTRACT)

    # 草图20 → 切除-拉伸12 (cut)
    with BuildSketch(Plane.XY.offset(50)):
        with BuildLine():
            Line((-35.848444434, -10.315176073), (-19.465403549, 1.156352654))
            ThreePointArc((-19.465403549, 1.156352654), (-15.287218107, 0.41962583), (-16.02394493, -3.758559612))
            Line((-16.02394493, -3.758559612), (-32.406985816, -15.230088339))
            ThreePointArc((-32.406985816, -15.230088339), (-36.585171258, -14.493361515), (-35.848444434, -10.315176073))
        make_face()
    extrude(amount=-CUT_EXTRUDE_12_DEPTH, mode=Mode.SUBTRACT)

    # 草图21 → 切除-拉伸13 (cut)
    with BuildSketch(Plane(origin=(0, 0, 44), x_dir=(-1, 0, 0), z_dir=(0, 0, -1)).offset(CUT_EXTRUDE_START)):
        with Locations(Location((34.127715125, -12.772632206, 0), (0, 0, 235))):
            Circle(SKETCH_21_R)
    extrude(amount=CUT_EXTRUDE_13_DEPTH, mode=Mode.SUBTRACT)


with BuildPart() as body_2:
    # 镜向1: mirrored copy
    add(part.part.mirror(Plane.ZX.offset(14.161375168)))


solid = body_2.part
